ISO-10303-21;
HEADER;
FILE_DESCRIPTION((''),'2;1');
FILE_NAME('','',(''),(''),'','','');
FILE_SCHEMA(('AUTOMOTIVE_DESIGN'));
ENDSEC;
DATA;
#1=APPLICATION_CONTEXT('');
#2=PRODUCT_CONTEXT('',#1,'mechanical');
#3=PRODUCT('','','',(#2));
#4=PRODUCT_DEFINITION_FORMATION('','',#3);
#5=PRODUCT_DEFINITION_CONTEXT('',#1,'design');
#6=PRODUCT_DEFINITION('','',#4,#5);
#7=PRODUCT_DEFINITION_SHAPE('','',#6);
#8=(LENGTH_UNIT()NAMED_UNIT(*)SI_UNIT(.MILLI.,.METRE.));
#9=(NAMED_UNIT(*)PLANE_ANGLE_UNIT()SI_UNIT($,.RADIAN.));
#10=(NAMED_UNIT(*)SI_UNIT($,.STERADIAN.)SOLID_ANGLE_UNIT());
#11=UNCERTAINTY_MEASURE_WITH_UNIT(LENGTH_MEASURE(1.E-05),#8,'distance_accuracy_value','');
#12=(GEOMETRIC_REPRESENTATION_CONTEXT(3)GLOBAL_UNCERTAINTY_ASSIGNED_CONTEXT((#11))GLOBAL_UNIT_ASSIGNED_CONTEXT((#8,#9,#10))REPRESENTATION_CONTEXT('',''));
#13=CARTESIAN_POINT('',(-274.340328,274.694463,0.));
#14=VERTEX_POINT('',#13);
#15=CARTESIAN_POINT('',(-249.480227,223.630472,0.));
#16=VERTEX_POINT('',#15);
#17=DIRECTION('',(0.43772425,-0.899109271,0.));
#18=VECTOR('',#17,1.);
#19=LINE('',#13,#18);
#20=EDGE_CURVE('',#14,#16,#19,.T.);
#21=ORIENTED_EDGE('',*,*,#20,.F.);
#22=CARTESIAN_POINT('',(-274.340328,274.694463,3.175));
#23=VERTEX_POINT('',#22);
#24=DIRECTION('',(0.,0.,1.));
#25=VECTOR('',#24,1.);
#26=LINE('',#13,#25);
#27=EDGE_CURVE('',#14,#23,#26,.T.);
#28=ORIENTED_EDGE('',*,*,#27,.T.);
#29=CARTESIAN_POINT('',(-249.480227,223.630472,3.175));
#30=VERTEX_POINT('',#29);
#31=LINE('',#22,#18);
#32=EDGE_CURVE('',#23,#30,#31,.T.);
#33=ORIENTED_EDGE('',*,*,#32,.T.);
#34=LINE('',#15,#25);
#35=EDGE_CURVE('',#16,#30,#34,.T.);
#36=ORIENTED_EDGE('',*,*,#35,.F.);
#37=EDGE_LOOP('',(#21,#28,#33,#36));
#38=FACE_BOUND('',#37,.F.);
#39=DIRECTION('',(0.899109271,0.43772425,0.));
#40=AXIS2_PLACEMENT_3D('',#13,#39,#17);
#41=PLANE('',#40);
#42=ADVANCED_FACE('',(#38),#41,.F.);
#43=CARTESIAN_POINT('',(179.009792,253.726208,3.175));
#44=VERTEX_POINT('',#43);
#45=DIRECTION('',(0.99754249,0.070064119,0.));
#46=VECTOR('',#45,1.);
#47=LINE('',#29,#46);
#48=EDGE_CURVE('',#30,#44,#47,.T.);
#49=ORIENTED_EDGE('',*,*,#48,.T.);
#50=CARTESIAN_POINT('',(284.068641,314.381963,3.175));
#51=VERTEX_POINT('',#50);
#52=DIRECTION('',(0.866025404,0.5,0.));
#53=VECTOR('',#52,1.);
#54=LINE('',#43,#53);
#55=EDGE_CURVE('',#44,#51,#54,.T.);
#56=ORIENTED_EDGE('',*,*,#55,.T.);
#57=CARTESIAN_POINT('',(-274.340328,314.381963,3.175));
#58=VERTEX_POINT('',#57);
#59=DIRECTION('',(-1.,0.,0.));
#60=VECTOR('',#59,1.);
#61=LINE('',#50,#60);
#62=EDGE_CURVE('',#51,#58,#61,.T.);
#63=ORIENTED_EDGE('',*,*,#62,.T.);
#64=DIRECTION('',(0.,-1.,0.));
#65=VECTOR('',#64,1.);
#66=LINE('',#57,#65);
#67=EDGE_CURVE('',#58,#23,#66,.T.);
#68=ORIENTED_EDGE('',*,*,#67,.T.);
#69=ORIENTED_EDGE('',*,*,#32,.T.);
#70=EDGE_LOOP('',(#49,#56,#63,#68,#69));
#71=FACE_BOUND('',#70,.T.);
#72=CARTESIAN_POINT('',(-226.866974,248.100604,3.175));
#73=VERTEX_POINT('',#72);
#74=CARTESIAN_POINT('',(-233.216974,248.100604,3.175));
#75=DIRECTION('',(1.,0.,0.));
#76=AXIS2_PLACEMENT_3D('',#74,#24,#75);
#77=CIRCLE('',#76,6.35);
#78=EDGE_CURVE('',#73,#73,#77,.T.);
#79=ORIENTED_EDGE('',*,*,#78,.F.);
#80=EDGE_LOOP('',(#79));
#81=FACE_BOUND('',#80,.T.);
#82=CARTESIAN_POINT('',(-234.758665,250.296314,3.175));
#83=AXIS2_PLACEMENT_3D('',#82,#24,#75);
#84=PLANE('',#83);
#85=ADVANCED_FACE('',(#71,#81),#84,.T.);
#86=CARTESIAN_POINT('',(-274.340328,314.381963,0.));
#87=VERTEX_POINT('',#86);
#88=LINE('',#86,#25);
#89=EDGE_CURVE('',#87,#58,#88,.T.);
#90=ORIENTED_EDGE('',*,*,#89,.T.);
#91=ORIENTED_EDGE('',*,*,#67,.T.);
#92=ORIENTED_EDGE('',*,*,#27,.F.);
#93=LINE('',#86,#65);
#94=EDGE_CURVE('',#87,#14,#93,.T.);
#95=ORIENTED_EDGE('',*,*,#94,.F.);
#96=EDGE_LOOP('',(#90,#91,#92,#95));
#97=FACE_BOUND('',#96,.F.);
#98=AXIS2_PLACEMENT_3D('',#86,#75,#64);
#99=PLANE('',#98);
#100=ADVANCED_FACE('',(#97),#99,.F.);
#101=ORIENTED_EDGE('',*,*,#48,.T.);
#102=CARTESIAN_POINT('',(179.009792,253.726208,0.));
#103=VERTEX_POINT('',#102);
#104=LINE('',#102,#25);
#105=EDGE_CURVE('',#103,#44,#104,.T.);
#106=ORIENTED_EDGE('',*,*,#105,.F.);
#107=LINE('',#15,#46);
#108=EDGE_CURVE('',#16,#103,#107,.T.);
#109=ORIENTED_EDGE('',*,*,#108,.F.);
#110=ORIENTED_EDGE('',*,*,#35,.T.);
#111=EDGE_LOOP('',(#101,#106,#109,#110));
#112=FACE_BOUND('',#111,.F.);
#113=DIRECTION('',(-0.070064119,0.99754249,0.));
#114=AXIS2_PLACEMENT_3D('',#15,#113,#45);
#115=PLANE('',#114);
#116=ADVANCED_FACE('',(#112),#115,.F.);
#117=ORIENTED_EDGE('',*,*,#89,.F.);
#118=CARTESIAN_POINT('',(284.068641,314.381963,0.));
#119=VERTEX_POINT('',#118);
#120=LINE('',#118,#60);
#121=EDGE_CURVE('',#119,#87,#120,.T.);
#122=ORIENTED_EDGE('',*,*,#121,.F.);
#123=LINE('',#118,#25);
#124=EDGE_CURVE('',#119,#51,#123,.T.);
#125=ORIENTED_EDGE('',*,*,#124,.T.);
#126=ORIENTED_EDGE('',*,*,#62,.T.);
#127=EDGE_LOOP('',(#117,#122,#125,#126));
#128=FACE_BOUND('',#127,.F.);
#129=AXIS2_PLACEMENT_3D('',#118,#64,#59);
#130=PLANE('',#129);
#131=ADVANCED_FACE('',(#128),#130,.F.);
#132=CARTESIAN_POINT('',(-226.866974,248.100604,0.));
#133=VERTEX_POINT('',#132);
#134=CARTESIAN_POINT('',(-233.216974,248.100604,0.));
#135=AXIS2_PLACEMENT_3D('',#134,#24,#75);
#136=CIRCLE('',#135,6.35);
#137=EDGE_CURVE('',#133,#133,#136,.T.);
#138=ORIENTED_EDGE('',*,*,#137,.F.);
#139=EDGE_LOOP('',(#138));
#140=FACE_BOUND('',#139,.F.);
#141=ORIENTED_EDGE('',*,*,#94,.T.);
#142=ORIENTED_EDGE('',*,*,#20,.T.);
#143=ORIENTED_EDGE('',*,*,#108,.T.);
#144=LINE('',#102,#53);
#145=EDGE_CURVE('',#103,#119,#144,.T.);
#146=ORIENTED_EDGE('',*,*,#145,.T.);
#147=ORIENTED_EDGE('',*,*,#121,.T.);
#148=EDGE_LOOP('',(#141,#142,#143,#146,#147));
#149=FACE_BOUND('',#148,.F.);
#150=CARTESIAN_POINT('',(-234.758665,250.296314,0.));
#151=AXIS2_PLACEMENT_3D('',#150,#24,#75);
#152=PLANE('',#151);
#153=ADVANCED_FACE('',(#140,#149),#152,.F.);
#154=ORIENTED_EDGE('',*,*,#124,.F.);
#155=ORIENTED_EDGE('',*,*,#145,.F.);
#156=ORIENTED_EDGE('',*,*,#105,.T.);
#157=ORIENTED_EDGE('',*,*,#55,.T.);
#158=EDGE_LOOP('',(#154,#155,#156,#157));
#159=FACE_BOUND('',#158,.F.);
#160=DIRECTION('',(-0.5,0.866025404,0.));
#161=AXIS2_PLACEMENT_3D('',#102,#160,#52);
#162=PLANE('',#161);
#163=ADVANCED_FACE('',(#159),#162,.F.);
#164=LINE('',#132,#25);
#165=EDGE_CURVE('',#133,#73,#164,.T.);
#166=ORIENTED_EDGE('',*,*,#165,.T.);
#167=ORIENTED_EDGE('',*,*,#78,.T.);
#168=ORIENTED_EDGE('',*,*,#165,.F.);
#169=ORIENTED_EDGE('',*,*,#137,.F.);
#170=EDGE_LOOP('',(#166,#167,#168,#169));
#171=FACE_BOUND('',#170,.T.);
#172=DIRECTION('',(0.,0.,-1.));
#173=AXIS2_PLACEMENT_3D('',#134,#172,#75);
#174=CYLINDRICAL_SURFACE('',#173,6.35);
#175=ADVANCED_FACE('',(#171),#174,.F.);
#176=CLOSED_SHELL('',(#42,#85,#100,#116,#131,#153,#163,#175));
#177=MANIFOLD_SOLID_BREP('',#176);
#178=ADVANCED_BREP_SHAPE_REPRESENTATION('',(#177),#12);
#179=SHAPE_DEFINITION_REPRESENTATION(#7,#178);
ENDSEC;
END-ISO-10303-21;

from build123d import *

# Parameters (mm, degrees)
F0_R     = 22.225
F0_R_2   = 6.35
F1_DEPTH = 3.175


# Not quite as in the source:
# - a feature names something its author has since deleted; it is built from what else it names


with BuildPart() as f1:
    # F0 (on Top) → F1 (new body)
    with BuildSketch(Plane.XY):
        Polygon((-217.8399659125, 274.6944633329), (-274.3403279131, 274.6944633329), (-249.4802269343, 223.6304721332), (-194.8479709943, 227.4676629604), align=None)
        with Locations((-233.2169740796, 248.1006040146)):
            Circle(F0_R, mode=Mode.SUBTRACT)
        with Locations((-233.2169740796, 248.1006040146)):
            Circle(F0_R)
        with Locations((-233.2169740796, 248.1006040146)):
            Circle(F0_R_2, mode=Mode.SUBTRACT)
        Polygon((-274.3403279131, 314.3819633329), (-274.3403279131, 274.6944633329), (-217.8399659125, 274.6944633329), (-233.0653279131, 305.9681798747), (-233.0653279131, 314.3819633329), align=None)
        Polygon((-233.0653279131, 305.9681798747), (-217.8399659125, 274.6944633329), (215.3278746861, 274.6944633329), (284.0686411115, 314.3819633329), (-233.0653279131, 314.3819633329), align=None)
        Polygon((215.3278746861, 274.6944633329), (-217.8399659125, 274.6944633329), (-194.8479709943, 227.4676629604), (179.0097919037, 253.726208462), align=None)
    extrude(amount=F1_DEPTH)


solid = f1.part
